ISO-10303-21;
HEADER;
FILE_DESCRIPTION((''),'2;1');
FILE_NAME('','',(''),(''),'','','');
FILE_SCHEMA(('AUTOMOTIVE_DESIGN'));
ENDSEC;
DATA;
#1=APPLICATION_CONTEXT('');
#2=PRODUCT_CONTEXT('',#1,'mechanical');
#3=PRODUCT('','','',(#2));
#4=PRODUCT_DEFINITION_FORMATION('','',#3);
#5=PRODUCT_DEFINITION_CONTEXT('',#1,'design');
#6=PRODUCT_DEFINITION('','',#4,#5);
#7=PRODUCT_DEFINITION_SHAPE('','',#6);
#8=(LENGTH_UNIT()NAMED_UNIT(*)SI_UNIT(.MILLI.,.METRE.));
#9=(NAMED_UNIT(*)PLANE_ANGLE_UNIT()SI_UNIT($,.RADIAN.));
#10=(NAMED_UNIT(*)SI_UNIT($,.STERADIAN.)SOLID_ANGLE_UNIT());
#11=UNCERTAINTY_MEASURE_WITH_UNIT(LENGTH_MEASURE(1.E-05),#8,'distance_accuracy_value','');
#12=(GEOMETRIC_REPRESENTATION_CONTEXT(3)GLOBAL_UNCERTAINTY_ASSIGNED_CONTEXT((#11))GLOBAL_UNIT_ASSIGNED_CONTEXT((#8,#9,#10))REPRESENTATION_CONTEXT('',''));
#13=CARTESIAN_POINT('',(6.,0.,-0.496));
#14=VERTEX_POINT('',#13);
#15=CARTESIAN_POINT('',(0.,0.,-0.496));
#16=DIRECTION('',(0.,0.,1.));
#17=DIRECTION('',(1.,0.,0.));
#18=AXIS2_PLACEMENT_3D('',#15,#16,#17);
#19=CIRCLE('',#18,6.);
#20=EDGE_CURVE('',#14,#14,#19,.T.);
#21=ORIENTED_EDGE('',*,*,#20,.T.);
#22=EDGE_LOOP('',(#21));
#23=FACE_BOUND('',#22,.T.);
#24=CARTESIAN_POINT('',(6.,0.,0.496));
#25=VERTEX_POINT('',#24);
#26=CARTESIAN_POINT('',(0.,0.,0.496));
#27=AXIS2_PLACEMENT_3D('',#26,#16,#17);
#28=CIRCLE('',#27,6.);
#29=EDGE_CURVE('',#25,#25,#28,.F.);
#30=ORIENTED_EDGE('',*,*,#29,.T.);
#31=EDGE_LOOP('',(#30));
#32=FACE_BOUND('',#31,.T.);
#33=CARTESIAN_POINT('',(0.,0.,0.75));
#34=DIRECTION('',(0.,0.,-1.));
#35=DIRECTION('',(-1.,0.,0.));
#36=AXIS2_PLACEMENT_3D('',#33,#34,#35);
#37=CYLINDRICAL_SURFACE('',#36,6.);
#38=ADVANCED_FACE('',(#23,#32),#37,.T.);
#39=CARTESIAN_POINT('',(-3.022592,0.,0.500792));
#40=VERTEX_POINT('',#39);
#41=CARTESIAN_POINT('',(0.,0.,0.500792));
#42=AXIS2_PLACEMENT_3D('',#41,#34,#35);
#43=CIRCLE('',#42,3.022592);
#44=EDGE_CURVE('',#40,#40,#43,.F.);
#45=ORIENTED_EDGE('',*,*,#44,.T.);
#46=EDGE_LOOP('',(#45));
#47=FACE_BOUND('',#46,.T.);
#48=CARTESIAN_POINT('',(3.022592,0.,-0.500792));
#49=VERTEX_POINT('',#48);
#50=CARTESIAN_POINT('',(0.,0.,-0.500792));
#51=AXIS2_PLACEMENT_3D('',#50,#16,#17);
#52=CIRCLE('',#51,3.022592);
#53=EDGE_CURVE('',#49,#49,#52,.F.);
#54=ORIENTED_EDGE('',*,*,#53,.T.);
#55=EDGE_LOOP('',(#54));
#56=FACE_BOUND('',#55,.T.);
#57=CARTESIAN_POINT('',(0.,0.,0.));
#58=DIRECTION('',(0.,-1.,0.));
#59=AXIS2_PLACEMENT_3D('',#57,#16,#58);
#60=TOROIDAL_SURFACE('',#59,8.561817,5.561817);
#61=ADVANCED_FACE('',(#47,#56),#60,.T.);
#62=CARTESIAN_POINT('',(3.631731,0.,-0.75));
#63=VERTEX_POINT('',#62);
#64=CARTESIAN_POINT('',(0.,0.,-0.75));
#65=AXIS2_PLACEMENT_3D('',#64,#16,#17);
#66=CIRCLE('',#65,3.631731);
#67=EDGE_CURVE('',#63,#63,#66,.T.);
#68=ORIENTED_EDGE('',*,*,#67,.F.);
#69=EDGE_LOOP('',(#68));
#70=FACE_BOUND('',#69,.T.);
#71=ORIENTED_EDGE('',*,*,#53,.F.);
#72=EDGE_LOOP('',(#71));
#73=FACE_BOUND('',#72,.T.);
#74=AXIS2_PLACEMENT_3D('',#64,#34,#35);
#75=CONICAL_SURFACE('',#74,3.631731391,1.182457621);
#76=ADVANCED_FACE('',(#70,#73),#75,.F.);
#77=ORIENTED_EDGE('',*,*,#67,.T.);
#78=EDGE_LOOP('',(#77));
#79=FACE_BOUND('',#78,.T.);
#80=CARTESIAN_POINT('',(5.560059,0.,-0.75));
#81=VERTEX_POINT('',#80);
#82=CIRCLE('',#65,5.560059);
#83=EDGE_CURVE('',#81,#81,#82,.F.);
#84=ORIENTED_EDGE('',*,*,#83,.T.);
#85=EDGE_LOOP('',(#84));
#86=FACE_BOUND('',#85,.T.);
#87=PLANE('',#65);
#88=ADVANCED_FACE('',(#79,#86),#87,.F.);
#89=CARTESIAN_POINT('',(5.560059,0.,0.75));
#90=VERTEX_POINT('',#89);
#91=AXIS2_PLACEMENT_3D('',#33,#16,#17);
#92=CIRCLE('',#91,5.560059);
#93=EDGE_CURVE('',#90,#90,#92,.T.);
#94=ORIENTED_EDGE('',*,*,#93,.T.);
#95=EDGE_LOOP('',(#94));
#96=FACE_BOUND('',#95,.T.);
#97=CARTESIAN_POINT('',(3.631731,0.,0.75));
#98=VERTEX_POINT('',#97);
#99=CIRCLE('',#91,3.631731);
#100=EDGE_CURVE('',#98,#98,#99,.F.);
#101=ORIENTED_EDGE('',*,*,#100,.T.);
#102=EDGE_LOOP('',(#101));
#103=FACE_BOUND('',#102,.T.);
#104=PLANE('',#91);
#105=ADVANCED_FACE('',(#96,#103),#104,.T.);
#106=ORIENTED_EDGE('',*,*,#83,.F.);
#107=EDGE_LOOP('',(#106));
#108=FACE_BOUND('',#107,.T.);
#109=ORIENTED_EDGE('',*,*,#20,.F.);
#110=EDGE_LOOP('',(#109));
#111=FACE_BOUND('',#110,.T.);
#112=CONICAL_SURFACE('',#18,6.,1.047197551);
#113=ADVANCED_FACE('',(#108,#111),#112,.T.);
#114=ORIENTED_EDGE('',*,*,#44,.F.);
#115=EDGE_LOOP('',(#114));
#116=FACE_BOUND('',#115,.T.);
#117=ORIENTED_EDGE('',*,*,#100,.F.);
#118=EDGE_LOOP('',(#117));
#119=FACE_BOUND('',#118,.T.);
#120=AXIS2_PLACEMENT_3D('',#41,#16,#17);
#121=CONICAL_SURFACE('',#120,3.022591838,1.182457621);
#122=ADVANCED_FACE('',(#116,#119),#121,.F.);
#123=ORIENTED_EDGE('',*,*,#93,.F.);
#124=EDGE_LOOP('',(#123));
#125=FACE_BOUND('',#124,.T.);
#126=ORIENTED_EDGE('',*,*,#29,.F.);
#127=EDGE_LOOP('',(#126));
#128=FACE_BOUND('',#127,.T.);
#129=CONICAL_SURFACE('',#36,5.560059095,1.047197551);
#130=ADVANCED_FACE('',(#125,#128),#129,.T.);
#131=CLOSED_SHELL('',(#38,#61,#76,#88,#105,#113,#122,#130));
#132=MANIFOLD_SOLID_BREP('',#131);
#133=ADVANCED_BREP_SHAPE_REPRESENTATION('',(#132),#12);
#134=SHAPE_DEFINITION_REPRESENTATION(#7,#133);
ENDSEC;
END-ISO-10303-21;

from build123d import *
from OCP.BRepFilletAPI import BRepFilletAPI_MakeChamfer

# Parameters (mm, degrees)
BOSS_EXTRUDE1_DEPTH      = 0.75
BOSS_EXTRUDE1_DEPTH_BACK = 0.75
SKETCH3_R                = 6
SKETCH3_R_2              = 3
CHAMFER1_SIZE            = 0.254
CHAMFER1_SIZE2           = 0.439940905
CHAMFER2_SIZE            = 0.580931391


with BuildPart() as part:
    # Sketch3 → Boss-Extrude1 (new, two sides: drawn at the far end of the back side and taken through both)
    with BuildSketch(Plane.XY.offset(-BOSS_EXTRUDE1_DEPTH_BACK)):
        Circle(SKETCH3_R)
        Circle(SKETCH3_R_2, mode=Mode.SUBTRACT)
    extrude(amount=BOSS_EXTRUDE1_DEPTH + BOSS_EXTRUDE1_DEPTH_BACK)

    # Chamfer1: one chamfer whose edges measure the first distance from different faces: ONE call of the kernel's chamfer builder (chamfer() names one face for all edges)
    chamfer1_edges_1 = [part.edges().sort_by_distance(p)[0] for p in [
        (-6, 0, 0.75),
    ]]
    chamfer1_side_1 = [part.faces().sort_by_distance(p)[0] for p in [
        (-6, 0, 0.375),
    ]]
    chamfer1_edges_2 = [part.edges().sort_by_distance(p)[0] for p in [
        (-6, 0, -0.75),
    ]]
    chamfer1_side_2 = [part.faces().sort_by_distance(p)[0] for p in [
        (-6, 0, -0.375),
    ]]
    chamfer1 = BRepFilletAPI_MakeChamfer(part.part.solid().wrapped)
    for e in chamfer1_edges_1:
        chamfer1.Add(CHAMFER1_SIZE, CHAMFER1_SIZE2, e.wrapped, chamfer1_side_1[0].wrapped)  # the first distance lies on this face
    for e in chamfer1_edges_2:
        chamfer1.Add(CHAMFER1_SIZE, CHAMFER1_SIZE2, e.wrapped, chamfer1_side_2[0].wrapped)  # the first distance lies on this face
    add(Compound.cast(chamfer1.Shape()), mode=Mode.REPLACE)

    # Sketch4 → Cut-Revolve1 (revolve, cut)
    with BuildSketch(Plane(origin=(0, 0, 0), x_dir=(0, 0, -1), z_dir=(1, 0, 0)), mode=Mode.PRIVATE) as cut_revolve1_sk:
        with BuildLine():
            Line((-0.75, 2.9492), (-0.75, 3.0508))
            ThreePointArc((-0.75, 3.0508), (0, 3), (0.75, 3.0508))
            Line((0.75, 3.0508), (0.75, 2.9492))
            Line((0.75, 2.9492), (-0.75, 2.9492))
        make_face()
    revolve(cut_revolve1_sk.sketch.rotate(Axis((0, 0, 0.75), (0, 0, -1)), 90), axis=Axis((0, 0, 0.75), (0, 0, -1)), mode=Mode.SUBTRACT)

    # Chamfer2
    # the kernel refuses this chamfer: 0.580931391, 0.254 mm, written as the material it takes off along each edge
    with BuildSketch(Plane(origin=(0, 0, -0.75), x_dir=(1, 0, 0), z_dir=(0, 1, 0))) as chamfer2_piece_1:
        with BuildLine():
            Line((3.0508 + CHAMFER2_SIZE, 0), (3.022591838, -0.249207666))
            ThreePointArc((3.022591838, -0.249207666), (3.034667103, -0.129981949), (3.0508, 0))
            Line((3.0508, 0), (3.0508 + CHAMFER2_SIZE, 0))
        make_face()
    revolve(axis=Axis((0, 0, -0.75), (0, 0, -1)), mode=Mode.SUBTRACT)
    with BuildSketch(Plane(origin=(0, 0, 0.75), x_dir=(1, 0, 0), z_dir=(0, 1, 0))) as chamfer2_piece_2:
        with BuildLine():
            Line((3.0508 + CHAMFER2_SIZE, 0), (3.022591838, 0.249207666))
            ThreePointArc((3.022591838, 0.249207666), (3.034667103, 0.129981949), (3.0508, 0))
            Line((3.0508, 0), (3.0508 + CHAMFER2_SIZE, 0))
        make_face()
    revolve(axis=Axis((0, 0, 0.75), (0, 0, -1)), mode=Mode.SUBTRACT)


solid = part.part
